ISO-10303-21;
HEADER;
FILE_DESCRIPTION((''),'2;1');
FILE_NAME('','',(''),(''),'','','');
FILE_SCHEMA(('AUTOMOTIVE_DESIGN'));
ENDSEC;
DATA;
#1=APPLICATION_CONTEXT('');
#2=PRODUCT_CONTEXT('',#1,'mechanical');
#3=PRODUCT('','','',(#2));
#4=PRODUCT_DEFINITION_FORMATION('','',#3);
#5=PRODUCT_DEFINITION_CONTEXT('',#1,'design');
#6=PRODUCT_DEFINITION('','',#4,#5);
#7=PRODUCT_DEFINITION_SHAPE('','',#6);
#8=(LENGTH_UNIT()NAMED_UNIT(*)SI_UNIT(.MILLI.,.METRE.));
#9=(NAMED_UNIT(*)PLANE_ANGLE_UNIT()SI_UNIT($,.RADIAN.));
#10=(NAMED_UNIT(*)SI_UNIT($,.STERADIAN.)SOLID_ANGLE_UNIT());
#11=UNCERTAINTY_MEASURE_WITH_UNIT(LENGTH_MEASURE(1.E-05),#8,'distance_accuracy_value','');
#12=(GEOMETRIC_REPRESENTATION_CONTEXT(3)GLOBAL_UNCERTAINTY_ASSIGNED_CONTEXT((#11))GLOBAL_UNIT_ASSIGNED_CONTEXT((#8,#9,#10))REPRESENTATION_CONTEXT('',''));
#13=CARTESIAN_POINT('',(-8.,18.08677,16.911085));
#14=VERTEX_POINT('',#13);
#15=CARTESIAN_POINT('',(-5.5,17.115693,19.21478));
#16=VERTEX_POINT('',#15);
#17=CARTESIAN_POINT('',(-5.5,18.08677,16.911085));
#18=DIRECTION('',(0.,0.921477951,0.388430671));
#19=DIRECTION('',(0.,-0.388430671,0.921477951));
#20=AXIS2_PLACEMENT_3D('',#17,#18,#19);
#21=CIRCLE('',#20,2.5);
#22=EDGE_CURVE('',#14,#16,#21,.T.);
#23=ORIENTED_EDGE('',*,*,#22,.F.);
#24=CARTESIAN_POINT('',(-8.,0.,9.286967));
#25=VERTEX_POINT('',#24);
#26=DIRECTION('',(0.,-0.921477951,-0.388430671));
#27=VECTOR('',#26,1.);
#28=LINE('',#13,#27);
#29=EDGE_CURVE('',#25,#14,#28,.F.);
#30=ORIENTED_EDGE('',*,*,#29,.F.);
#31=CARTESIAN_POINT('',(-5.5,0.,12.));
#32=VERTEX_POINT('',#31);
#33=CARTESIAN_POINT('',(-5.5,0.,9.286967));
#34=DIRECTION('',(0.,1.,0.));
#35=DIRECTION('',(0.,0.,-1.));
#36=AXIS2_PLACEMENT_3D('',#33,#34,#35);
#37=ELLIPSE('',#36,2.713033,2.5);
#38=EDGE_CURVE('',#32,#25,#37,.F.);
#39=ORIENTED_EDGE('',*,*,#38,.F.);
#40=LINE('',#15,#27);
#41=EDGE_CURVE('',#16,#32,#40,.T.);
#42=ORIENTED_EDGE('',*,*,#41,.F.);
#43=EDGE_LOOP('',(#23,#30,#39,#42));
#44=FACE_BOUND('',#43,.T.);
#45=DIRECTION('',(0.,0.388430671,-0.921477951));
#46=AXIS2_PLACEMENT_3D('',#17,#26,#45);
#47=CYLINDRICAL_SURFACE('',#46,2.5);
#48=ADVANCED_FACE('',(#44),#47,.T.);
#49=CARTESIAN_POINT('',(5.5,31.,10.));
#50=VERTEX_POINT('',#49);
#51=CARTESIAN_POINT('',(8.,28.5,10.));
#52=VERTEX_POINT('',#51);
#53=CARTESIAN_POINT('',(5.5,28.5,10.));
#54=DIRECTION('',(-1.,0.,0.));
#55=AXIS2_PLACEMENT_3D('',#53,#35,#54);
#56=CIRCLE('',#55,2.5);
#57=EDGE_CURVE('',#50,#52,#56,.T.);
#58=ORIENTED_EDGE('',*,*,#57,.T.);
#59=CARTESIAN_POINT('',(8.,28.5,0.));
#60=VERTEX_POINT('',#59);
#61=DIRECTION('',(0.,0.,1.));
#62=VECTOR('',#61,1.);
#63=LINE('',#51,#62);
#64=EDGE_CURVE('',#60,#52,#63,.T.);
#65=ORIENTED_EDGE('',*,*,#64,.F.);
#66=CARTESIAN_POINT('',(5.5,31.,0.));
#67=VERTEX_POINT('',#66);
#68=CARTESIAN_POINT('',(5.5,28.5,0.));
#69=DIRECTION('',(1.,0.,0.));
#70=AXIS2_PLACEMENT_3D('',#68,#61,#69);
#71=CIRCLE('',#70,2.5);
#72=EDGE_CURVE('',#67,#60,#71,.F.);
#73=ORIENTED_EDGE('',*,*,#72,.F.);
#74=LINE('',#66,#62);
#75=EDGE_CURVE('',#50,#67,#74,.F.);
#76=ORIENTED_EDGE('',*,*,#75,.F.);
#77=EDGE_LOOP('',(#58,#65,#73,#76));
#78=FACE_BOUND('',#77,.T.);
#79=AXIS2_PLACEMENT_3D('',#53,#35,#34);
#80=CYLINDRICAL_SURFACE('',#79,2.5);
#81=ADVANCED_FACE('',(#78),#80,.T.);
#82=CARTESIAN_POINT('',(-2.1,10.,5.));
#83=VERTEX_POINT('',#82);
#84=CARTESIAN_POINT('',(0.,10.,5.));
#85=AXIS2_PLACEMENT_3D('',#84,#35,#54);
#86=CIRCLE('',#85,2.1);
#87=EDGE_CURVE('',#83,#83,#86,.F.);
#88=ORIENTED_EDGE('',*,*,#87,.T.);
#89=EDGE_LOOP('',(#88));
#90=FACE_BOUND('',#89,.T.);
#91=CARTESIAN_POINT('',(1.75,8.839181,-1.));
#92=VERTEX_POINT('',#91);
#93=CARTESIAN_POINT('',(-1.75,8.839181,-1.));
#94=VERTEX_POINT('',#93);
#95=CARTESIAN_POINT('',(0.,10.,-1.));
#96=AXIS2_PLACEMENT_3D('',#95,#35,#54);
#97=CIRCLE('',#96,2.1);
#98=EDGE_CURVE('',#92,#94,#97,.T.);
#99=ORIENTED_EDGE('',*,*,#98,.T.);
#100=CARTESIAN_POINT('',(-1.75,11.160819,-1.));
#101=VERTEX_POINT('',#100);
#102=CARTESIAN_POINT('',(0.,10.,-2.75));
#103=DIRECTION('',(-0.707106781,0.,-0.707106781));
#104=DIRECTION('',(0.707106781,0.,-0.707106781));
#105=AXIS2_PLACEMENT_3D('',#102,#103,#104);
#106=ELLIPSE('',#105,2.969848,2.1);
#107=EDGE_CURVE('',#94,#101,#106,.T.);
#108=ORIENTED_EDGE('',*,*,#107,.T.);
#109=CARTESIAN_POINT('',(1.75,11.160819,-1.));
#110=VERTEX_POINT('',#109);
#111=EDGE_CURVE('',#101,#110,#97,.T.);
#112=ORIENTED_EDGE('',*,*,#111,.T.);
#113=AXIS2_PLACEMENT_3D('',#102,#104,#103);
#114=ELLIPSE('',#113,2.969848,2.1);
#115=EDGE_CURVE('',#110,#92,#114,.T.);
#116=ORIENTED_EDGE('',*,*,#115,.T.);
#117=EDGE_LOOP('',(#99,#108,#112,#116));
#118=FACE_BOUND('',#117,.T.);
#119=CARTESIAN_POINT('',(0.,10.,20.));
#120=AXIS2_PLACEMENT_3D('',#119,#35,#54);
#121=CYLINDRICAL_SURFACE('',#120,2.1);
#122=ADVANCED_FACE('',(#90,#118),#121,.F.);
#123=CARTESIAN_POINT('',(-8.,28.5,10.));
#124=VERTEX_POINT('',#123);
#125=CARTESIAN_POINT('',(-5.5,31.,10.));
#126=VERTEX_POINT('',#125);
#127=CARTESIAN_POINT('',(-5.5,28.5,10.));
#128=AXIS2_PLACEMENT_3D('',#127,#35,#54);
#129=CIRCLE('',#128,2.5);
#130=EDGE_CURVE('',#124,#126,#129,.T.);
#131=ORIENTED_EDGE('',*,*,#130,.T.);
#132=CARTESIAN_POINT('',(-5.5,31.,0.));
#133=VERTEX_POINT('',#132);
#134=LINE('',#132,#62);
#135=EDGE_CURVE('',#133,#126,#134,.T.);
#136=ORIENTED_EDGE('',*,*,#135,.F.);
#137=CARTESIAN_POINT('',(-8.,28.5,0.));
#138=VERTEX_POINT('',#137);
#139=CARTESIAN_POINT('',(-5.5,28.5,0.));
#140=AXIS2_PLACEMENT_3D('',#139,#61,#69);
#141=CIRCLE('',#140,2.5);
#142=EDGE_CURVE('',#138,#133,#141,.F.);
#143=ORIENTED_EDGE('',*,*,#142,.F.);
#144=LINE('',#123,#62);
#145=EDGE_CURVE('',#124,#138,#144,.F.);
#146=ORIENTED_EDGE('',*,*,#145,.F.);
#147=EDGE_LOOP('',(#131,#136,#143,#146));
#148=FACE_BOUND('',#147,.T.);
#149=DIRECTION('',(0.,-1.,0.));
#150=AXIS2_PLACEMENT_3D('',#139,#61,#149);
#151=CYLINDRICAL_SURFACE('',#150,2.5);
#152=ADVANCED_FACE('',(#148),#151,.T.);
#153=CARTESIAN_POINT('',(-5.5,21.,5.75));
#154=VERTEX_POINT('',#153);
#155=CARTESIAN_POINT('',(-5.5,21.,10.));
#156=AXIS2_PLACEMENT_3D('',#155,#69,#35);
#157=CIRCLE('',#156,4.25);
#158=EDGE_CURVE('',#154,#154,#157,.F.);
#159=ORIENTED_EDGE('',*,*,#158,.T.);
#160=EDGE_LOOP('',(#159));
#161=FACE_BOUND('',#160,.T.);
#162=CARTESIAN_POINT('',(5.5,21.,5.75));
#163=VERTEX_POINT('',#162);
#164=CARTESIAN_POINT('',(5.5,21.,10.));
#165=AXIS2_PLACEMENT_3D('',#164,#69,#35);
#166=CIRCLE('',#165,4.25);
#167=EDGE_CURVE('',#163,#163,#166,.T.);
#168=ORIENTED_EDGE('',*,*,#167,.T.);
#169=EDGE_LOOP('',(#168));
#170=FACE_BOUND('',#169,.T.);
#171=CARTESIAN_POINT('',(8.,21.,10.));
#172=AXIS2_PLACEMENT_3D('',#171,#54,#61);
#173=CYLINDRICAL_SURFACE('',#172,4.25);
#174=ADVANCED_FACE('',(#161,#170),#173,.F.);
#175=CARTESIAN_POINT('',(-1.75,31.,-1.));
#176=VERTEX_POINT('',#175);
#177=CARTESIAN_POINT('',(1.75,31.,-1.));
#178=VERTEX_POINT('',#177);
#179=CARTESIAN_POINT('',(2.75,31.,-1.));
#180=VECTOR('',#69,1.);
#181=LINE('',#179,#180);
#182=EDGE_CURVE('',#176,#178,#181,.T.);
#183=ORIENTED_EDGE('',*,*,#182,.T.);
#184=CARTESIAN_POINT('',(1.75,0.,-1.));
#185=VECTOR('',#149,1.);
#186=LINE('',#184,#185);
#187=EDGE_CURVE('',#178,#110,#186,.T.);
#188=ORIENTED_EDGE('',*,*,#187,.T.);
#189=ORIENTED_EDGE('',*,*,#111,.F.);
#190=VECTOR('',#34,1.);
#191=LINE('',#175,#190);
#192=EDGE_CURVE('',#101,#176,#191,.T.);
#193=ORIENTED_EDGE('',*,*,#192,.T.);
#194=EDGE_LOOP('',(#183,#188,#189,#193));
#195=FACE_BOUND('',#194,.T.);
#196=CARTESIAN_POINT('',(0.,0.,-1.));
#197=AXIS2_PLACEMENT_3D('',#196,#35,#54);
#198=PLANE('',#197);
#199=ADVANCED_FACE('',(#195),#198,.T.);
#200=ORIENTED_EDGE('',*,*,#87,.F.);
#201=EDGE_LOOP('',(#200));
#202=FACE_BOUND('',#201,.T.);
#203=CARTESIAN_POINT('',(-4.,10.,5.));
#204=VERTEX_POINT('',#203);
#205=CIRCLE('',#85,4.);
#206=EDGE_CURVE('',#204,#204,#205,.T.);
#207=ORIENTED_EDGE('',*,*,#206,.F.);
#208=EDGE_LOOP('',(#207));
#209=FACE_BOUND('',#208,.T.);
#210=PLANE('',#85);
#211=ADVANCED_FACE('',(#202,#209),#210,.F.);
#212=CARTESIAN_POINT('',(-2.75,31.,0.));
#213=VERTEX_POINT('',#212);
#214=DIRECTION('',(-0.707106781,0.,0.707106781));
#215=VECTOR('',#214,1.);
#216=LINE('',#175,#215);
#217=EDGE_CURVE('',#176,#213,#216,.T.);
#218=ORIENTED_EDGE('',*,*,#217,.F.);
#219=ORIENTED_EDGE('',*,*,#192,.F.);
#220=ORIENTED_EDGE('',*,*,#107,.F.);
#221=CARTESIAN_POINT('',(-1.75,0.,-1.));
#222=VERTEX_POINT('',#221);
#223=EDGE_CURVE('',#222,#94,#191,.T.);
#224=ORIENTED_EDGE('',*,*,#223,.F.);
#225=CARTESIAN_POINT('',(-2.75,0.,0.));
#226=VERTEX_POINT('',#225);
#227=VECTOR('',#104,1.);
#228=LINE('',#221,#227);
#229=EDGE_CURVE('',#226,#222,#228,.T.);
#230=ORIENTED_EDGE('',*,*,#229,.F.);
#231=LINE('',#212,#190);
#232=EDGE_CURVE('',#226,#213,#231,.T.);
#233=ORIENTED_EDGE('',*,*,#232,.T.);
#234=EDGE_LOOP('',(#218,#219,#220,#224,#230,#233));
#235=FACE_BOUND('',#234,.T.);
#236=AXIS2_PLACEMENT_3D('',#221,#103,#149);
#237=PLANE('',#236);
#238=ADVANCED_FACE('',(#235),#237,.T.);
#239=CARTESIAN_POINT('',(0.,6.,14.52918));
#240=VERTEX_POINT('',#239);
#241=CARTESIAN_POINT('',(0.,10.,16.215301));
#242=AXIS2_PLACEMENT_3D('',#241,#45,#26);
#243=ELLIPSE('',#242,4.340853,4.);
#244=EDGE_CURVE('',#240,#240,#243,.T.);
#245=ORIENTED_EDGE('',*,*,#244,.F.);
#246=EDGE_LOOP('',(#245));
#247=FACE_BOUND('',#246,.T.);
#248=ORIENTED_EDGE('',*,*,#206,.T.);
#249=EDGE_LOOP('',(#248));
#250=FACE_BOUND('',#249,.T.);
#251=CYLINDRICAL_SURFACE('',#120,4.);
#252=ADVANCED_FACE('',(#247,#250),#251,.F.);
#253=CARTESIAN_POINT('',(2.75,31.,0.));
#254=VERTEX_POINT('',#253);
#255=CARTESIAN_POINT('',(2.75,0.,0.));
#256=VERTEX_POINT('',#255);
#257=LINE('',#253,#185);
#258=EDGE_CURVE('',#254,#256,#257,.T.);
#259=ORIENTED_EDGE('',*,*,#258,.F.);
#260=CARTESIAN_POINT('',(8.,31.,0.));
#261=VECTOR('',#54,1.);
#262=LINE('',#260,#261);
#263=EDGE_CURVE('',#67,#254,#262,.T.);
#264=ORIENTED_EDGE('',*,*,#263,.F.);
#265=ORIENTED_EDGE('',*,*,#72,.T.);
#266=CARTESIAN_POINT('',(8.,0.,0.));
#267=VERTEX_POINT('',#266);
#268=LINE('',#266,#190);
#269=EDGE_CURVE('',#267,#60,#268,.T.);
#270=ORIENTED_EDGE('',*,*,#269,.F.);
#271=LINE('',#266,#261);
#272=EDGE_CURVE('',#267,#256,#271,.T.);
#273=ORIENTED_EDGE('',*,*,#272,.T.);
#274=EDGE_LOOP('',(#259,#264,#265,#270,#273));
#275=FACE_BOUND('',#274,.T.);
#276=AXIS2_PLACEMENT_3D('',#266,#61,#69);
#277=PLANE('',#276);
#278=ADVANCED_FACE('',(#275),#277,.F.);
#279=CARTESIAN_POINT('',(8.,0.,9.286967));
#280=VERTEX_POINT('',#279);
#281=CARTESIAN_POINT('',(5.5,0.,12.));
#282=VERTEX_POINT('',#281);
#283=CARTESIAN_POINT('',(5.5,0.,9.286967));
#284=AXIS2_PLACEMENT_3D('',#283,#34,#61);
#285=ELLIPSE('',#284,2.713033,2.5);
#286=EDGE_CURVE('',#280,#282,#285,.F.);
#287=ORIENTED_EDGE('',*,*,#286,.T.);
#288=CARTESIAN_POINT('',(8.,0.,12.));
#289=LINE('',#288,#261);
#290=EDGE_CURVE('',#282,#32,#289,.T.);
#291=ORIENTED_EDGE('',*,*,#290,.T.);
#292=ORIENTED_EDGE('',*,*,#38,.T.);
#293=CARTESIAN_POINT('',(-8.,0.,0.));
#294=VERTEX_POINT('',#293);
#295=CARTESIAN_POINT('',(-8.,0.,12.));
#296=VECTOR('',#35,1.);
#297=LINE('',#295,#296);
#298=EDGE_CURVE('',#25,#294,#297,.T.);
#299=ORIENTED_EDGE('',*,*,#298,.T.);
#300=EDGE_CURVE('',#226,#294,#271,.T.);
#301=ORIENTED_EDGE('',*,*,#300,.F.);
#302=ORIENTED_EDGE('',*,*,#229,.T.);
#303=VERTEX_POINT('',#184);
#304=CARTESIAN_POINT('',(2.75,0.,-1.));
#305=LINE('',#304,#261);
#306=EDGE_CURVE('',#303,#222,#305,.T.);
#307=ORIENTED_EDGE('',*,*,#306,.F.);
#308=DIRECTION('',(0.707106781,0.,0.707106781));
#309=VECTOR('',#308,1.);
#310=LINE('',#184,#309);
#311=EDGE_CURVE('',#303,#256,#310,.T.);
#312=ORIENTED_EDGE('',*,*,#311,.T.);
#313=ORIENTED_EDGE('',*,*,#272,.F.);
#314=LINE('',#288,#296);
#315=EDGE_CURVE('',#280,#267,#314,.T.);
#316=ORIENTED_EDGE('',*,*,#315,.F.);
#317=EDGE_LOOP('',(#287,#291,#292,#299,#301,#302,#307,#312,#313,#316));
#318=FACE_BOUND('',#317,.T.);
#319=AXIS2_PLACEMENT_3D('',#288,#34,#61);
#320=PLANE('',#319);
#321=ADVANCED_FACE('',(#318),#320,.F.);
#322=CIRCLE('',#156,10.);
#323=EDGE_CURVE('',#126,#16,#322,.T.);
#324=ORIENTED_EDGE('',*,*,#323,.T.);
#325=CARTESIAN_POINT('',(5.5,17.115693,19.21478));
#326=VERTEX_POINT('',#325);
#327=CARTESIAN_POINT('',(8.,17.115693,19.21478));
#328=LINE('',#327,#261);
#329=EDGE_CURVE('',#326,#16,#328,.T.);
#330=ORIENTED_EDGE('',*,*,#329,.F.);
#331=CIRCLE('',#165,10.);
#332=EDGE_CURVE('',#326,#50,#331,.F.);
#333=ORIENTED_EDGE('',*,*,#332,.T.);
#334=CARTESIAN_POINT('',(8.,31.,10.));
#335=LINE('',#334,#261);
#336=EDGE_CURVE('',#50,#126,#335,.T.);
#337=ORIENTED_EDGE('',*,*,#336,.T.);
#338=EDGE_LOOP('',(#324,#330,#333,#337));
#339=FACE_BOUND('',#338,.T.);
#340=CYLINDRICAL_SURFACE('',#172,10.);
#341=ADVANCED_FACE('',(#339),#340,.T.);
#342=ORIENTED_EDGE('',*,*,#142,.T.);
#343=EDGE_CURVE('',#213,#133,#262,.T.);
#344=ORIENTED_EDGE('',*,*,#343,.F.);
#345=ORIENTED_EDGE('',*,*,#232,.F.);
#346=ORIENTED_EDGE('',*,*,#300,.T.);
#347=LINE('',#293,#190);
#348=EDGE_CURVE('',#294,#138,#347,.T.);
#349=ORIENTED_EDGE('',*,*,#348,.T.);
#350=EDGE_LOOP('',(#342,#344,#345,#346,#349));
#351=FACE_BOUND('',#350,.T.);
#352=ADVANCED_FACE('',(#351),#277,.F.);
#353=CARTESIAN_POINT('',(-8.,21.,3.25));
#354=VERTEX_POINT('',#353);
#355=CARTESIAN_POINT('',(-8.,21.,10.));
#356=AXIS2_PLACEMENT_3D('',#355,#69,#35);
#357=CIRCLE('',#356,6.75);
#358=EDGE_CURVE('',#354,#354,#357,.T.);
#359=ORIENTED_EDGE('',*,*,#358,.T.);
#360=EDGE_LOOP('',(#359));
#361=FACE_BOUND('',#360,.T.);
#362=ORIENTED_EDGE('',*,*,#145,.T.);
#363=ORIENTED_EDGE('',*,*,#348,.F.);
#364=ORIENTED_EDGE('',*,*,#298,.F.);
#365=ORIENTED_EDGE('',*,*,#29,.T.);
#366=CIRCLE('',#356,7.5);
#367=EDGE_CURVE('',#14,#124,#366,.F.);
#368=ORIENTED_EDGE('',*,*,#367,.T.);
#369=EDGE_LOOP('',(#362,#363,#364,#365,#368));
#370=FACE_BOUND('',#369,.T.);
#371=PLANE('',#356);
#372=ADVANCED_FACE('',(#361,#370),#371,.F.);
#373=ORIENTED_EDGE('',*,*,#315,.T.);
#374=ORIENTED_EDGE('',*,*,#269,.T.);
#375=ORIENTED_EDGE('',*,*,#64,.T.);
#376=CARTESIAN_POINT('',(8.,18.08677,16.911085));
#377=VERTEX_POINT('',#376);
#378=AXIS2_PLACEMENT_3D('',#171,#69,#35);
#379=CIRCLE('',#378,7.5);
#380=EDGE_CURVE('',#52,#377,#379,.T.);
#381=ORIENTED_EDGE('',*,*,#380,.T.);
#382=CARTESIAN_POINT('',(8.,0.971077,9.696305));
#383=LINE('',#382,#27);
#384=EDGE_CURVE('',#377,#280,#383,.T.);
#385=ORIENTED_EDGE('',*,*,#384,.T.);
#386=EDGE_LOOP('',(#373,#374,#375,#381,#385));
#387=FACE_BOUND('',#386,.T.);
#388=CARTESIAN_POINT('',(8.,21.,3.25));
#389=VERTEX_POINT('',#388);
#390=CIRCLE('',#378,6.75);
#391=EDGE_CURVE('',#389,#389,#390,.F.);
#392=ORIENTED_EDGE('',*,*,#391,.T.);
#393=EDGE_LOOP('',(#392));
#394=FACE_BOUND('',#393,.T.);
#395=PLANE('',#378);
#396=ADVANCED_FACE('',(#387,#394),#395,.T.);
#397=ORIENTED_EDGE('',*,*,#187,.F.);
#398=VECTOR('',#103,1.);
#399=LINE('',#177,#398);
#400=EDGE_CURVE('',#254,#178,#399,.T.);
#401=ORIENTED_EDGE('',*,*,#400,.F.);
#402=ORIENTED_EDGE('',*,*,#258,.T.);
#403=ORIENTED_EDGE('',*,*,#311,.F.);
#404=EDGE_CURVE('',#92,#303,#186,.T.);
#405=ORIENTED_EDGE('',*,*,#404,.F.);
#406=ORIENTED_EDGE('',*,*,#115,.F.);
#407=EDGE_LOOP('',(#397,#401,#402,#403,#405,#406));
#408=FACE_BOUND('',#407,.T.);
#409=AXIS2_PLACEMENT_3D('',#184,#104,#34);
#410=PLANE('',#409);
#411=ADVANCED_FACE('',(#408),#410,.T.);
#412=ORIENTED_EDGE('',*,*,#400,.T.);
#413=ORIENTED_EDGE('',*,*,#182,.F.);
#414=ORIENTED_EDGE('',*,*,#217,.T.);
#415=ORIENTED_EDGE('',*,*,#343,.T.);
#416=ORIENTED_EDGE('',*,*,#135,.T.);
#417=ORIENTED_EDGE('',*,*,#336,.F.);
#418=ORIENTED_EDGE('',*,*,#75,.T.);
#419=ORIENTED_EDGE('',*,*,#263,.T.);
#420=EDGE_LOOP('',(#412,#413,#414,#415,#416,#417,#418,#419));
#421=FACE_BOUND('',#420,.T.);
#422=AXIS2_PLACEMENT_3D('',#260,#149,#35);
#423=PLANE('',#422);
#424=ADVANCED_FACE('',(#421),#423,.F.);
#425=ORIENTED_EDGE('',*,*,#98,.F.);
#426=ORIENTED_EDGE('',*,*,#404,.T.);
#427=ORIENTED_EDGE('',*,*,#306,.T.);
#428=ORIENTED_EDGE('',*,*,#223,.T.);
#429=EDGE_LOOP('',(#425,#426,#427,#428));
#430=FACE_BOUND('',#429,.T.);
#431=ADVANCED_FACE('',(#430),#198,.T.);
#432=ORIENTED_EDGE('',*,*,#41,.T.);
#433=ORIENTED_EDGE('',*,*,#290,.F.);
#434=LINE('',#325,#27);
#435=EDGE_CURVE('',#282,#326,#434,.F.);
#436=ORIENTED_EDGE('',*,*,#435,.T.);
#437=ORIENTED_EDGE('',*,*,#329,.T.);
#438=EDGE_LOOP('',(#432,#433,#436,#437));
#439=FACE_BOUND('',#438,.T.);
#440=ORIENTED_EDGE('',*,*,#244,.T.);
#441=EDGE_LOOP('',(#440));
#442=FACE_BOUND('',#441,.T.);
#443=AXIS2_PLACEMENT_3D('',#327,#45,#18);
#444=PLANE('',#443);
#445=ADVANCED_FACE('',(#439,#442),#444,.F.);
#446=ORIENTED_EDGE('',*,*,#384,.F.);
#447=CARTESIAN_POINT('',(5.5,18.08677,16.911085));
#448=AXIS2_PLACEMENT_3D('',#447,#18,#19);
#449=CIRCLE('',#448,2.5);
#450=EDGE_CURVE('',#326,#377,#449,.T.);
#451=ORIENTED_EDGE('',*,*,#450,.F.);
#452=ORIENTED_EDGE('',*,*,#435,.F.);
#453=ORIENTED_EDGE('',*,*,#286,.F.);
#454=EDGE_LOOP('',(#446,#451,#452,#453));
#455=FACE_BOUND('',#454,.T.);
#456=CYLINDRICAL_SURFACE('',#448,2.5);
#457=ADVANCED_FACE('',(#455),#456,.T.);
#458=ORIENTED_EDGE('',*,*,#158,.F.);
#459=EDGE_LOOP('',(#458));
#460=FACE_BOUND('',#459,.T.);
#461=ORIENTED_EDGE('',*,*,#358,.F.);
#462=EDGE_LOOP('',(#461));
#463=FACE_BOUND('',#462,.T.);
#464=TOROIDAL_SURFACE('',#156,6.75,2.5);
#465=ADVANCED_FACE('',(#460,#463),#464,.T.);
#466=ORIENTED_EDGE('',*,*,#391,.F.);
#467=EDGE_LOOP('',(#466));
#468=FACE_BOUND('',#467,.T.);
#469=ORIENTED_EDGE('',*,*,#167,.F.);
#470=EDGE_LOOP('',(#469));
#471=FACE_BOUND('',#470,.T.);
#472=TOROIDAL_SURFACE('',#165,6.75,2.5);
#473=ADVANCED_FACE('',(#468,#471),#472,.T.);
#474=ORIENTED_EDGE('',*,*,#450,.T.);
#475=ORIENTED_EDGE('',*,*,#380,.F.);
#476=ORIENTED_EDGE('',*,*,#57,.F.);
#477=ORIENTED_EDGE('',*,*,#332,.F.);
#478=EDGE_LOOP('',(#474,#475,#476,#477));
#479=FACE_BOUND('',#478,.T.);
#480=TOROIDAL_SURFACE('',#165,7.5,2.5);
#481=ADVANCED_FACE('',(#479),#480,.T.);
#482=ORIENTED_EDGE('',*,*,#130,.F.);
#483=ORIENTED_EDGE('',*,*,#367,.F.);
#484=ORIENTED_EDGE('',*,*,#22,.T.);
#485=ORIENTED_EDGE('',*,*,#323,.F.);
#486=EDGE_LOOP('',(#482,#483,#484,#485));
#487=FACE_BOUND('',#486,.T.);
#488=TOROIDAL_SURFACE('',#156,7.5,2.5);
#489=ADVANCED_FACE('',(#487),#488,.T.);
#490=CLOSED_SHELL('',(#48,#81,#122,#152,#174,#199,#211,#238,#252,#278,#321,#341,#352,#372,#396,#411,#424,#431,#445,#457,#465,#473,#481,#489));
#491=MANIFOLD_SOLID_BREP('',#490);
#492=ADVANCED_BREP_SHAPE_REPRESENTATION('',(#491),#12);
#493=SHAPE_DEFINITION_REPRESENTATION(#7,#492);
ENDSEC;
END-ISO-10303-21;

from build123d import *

# Parameters (mm, degrees)
ESQUISSE1_R             = 4.25
BOSS_EXTRU_1_DEPTH      = 8
ESQUISSE2_W             = 5.5
ESQUISSE2_H             = 31
BOSS_EXTRU_2_DEPTH      = 1
CHANFREIN1_SIZE         = 1
ESQUISSE3_R             = 2.1
ENL_V_MAT_EXTRU_1_DEPTH = 39.288379438
ENL_V_START             = -5
ESQUISSE4_R             = 4
ENL_V_MAT_EXTRU_2_DEPTH = 33.749172176
CONG_1_R                = 2.5


with BuildPart() as part:
    # Esquisse1 → Boss.-Extru.1 (new, symmetric)
    with BuildSketch(Plane(origin=(0, 0, 0), x_dir=(0, 0, -1), z_dir=(1, 0, 0))):
        with BuildLine():
            Line((0, 0), (0, 31))
            Line((0, 31), (-10, 31))
            ThreePointArc((-10, 31), (-18.331958567, 26.529779962), (-19.214779507, 17.115693286))
            Line((-19.214779507, 17.115693286), (-12, 0))
            Line((-12, 0), (0, 0))
        make_face()
        with Locations((-10, 21)):
            Circle(ESQUISSE1_R, mode=Mode.SUBTRACT)
    extrude(amount=BOSS_EXTRU_1_DEPTH, both=True)

    # Esquisse2 → Boss.-Extru.2 (add)
    with BuildSketch(Plane(origin=(0, 0, 0), x_dir=(-1, 0, 0), z_dir=(0, 0, -1))):
        with Locations((0, 15.5)):
            Rectangle(ESQUISSE2_W, ESQUISSE2_H)
    extrude(amount=BOSS_EXTRU_2_DEPTH)

    # Chanfrein1
    chanfrein1_edges = [part.edges().sort_by_distance(p)[0] for p in [
        (-2.75, 15.5, -1),
        (2.75, 15.5, -1),
    ]]
    chamfer(chanfrein1_edges, length=CHANFREIN1_SIZE - 0.0001)  # a hair under: the kernel refuses the full size

    # Esquisse3 → Enlèv. mat.-Extru.1 (cut, through all)
    with BuildSketch(Plane(origin=(0, 0, -1), x_dir=(-1, 0, 0), z_dir=(0, 0, -1))):
        with Locations(Location((0, 10, 0), (0, 0, 326.442690238))):
            Circle(ESQUISSE3_R)
    extrude(amount=-ENL_V_MAT_EXTRU_1_DEPTH, mode=Mode.SUBTRACT)

    # Esquisse4 → Enlèv. mat.-Extru.2 (cut, through all)
    with BuildSketch(Plane(origin=(0, 0, 0), x_dir=(-1, 0, 0), z_dir=(0, 0, -1)).offset(ENL_V_START)):
        with Locations((0, 10)):
            Circle(ESQUISSE4_R)
    extrude(amount=-ENL_V_MAT_EXTRU_2_DEPTH, mode=Mode.SUBTRACT)

    # Congé1
    cong_1_edges = [part.edges().sort_by_distance(p)[0] for p in [
        (8, 31, 5),
        (8, 26.529779962, 18.331958567),
        (-8, 21, 14.25),
        (8, 21, 14.25),
        (8, 8.557846643, 15.607389753),
        (-8, 8.557846643, 15.607389753),
        (-8, 26.529779962, 18.331958567),
        (-8, 31, 5),
    ]]
    fillet(cong_1_edges, radius=CONG_1_R)


solid = part.part
